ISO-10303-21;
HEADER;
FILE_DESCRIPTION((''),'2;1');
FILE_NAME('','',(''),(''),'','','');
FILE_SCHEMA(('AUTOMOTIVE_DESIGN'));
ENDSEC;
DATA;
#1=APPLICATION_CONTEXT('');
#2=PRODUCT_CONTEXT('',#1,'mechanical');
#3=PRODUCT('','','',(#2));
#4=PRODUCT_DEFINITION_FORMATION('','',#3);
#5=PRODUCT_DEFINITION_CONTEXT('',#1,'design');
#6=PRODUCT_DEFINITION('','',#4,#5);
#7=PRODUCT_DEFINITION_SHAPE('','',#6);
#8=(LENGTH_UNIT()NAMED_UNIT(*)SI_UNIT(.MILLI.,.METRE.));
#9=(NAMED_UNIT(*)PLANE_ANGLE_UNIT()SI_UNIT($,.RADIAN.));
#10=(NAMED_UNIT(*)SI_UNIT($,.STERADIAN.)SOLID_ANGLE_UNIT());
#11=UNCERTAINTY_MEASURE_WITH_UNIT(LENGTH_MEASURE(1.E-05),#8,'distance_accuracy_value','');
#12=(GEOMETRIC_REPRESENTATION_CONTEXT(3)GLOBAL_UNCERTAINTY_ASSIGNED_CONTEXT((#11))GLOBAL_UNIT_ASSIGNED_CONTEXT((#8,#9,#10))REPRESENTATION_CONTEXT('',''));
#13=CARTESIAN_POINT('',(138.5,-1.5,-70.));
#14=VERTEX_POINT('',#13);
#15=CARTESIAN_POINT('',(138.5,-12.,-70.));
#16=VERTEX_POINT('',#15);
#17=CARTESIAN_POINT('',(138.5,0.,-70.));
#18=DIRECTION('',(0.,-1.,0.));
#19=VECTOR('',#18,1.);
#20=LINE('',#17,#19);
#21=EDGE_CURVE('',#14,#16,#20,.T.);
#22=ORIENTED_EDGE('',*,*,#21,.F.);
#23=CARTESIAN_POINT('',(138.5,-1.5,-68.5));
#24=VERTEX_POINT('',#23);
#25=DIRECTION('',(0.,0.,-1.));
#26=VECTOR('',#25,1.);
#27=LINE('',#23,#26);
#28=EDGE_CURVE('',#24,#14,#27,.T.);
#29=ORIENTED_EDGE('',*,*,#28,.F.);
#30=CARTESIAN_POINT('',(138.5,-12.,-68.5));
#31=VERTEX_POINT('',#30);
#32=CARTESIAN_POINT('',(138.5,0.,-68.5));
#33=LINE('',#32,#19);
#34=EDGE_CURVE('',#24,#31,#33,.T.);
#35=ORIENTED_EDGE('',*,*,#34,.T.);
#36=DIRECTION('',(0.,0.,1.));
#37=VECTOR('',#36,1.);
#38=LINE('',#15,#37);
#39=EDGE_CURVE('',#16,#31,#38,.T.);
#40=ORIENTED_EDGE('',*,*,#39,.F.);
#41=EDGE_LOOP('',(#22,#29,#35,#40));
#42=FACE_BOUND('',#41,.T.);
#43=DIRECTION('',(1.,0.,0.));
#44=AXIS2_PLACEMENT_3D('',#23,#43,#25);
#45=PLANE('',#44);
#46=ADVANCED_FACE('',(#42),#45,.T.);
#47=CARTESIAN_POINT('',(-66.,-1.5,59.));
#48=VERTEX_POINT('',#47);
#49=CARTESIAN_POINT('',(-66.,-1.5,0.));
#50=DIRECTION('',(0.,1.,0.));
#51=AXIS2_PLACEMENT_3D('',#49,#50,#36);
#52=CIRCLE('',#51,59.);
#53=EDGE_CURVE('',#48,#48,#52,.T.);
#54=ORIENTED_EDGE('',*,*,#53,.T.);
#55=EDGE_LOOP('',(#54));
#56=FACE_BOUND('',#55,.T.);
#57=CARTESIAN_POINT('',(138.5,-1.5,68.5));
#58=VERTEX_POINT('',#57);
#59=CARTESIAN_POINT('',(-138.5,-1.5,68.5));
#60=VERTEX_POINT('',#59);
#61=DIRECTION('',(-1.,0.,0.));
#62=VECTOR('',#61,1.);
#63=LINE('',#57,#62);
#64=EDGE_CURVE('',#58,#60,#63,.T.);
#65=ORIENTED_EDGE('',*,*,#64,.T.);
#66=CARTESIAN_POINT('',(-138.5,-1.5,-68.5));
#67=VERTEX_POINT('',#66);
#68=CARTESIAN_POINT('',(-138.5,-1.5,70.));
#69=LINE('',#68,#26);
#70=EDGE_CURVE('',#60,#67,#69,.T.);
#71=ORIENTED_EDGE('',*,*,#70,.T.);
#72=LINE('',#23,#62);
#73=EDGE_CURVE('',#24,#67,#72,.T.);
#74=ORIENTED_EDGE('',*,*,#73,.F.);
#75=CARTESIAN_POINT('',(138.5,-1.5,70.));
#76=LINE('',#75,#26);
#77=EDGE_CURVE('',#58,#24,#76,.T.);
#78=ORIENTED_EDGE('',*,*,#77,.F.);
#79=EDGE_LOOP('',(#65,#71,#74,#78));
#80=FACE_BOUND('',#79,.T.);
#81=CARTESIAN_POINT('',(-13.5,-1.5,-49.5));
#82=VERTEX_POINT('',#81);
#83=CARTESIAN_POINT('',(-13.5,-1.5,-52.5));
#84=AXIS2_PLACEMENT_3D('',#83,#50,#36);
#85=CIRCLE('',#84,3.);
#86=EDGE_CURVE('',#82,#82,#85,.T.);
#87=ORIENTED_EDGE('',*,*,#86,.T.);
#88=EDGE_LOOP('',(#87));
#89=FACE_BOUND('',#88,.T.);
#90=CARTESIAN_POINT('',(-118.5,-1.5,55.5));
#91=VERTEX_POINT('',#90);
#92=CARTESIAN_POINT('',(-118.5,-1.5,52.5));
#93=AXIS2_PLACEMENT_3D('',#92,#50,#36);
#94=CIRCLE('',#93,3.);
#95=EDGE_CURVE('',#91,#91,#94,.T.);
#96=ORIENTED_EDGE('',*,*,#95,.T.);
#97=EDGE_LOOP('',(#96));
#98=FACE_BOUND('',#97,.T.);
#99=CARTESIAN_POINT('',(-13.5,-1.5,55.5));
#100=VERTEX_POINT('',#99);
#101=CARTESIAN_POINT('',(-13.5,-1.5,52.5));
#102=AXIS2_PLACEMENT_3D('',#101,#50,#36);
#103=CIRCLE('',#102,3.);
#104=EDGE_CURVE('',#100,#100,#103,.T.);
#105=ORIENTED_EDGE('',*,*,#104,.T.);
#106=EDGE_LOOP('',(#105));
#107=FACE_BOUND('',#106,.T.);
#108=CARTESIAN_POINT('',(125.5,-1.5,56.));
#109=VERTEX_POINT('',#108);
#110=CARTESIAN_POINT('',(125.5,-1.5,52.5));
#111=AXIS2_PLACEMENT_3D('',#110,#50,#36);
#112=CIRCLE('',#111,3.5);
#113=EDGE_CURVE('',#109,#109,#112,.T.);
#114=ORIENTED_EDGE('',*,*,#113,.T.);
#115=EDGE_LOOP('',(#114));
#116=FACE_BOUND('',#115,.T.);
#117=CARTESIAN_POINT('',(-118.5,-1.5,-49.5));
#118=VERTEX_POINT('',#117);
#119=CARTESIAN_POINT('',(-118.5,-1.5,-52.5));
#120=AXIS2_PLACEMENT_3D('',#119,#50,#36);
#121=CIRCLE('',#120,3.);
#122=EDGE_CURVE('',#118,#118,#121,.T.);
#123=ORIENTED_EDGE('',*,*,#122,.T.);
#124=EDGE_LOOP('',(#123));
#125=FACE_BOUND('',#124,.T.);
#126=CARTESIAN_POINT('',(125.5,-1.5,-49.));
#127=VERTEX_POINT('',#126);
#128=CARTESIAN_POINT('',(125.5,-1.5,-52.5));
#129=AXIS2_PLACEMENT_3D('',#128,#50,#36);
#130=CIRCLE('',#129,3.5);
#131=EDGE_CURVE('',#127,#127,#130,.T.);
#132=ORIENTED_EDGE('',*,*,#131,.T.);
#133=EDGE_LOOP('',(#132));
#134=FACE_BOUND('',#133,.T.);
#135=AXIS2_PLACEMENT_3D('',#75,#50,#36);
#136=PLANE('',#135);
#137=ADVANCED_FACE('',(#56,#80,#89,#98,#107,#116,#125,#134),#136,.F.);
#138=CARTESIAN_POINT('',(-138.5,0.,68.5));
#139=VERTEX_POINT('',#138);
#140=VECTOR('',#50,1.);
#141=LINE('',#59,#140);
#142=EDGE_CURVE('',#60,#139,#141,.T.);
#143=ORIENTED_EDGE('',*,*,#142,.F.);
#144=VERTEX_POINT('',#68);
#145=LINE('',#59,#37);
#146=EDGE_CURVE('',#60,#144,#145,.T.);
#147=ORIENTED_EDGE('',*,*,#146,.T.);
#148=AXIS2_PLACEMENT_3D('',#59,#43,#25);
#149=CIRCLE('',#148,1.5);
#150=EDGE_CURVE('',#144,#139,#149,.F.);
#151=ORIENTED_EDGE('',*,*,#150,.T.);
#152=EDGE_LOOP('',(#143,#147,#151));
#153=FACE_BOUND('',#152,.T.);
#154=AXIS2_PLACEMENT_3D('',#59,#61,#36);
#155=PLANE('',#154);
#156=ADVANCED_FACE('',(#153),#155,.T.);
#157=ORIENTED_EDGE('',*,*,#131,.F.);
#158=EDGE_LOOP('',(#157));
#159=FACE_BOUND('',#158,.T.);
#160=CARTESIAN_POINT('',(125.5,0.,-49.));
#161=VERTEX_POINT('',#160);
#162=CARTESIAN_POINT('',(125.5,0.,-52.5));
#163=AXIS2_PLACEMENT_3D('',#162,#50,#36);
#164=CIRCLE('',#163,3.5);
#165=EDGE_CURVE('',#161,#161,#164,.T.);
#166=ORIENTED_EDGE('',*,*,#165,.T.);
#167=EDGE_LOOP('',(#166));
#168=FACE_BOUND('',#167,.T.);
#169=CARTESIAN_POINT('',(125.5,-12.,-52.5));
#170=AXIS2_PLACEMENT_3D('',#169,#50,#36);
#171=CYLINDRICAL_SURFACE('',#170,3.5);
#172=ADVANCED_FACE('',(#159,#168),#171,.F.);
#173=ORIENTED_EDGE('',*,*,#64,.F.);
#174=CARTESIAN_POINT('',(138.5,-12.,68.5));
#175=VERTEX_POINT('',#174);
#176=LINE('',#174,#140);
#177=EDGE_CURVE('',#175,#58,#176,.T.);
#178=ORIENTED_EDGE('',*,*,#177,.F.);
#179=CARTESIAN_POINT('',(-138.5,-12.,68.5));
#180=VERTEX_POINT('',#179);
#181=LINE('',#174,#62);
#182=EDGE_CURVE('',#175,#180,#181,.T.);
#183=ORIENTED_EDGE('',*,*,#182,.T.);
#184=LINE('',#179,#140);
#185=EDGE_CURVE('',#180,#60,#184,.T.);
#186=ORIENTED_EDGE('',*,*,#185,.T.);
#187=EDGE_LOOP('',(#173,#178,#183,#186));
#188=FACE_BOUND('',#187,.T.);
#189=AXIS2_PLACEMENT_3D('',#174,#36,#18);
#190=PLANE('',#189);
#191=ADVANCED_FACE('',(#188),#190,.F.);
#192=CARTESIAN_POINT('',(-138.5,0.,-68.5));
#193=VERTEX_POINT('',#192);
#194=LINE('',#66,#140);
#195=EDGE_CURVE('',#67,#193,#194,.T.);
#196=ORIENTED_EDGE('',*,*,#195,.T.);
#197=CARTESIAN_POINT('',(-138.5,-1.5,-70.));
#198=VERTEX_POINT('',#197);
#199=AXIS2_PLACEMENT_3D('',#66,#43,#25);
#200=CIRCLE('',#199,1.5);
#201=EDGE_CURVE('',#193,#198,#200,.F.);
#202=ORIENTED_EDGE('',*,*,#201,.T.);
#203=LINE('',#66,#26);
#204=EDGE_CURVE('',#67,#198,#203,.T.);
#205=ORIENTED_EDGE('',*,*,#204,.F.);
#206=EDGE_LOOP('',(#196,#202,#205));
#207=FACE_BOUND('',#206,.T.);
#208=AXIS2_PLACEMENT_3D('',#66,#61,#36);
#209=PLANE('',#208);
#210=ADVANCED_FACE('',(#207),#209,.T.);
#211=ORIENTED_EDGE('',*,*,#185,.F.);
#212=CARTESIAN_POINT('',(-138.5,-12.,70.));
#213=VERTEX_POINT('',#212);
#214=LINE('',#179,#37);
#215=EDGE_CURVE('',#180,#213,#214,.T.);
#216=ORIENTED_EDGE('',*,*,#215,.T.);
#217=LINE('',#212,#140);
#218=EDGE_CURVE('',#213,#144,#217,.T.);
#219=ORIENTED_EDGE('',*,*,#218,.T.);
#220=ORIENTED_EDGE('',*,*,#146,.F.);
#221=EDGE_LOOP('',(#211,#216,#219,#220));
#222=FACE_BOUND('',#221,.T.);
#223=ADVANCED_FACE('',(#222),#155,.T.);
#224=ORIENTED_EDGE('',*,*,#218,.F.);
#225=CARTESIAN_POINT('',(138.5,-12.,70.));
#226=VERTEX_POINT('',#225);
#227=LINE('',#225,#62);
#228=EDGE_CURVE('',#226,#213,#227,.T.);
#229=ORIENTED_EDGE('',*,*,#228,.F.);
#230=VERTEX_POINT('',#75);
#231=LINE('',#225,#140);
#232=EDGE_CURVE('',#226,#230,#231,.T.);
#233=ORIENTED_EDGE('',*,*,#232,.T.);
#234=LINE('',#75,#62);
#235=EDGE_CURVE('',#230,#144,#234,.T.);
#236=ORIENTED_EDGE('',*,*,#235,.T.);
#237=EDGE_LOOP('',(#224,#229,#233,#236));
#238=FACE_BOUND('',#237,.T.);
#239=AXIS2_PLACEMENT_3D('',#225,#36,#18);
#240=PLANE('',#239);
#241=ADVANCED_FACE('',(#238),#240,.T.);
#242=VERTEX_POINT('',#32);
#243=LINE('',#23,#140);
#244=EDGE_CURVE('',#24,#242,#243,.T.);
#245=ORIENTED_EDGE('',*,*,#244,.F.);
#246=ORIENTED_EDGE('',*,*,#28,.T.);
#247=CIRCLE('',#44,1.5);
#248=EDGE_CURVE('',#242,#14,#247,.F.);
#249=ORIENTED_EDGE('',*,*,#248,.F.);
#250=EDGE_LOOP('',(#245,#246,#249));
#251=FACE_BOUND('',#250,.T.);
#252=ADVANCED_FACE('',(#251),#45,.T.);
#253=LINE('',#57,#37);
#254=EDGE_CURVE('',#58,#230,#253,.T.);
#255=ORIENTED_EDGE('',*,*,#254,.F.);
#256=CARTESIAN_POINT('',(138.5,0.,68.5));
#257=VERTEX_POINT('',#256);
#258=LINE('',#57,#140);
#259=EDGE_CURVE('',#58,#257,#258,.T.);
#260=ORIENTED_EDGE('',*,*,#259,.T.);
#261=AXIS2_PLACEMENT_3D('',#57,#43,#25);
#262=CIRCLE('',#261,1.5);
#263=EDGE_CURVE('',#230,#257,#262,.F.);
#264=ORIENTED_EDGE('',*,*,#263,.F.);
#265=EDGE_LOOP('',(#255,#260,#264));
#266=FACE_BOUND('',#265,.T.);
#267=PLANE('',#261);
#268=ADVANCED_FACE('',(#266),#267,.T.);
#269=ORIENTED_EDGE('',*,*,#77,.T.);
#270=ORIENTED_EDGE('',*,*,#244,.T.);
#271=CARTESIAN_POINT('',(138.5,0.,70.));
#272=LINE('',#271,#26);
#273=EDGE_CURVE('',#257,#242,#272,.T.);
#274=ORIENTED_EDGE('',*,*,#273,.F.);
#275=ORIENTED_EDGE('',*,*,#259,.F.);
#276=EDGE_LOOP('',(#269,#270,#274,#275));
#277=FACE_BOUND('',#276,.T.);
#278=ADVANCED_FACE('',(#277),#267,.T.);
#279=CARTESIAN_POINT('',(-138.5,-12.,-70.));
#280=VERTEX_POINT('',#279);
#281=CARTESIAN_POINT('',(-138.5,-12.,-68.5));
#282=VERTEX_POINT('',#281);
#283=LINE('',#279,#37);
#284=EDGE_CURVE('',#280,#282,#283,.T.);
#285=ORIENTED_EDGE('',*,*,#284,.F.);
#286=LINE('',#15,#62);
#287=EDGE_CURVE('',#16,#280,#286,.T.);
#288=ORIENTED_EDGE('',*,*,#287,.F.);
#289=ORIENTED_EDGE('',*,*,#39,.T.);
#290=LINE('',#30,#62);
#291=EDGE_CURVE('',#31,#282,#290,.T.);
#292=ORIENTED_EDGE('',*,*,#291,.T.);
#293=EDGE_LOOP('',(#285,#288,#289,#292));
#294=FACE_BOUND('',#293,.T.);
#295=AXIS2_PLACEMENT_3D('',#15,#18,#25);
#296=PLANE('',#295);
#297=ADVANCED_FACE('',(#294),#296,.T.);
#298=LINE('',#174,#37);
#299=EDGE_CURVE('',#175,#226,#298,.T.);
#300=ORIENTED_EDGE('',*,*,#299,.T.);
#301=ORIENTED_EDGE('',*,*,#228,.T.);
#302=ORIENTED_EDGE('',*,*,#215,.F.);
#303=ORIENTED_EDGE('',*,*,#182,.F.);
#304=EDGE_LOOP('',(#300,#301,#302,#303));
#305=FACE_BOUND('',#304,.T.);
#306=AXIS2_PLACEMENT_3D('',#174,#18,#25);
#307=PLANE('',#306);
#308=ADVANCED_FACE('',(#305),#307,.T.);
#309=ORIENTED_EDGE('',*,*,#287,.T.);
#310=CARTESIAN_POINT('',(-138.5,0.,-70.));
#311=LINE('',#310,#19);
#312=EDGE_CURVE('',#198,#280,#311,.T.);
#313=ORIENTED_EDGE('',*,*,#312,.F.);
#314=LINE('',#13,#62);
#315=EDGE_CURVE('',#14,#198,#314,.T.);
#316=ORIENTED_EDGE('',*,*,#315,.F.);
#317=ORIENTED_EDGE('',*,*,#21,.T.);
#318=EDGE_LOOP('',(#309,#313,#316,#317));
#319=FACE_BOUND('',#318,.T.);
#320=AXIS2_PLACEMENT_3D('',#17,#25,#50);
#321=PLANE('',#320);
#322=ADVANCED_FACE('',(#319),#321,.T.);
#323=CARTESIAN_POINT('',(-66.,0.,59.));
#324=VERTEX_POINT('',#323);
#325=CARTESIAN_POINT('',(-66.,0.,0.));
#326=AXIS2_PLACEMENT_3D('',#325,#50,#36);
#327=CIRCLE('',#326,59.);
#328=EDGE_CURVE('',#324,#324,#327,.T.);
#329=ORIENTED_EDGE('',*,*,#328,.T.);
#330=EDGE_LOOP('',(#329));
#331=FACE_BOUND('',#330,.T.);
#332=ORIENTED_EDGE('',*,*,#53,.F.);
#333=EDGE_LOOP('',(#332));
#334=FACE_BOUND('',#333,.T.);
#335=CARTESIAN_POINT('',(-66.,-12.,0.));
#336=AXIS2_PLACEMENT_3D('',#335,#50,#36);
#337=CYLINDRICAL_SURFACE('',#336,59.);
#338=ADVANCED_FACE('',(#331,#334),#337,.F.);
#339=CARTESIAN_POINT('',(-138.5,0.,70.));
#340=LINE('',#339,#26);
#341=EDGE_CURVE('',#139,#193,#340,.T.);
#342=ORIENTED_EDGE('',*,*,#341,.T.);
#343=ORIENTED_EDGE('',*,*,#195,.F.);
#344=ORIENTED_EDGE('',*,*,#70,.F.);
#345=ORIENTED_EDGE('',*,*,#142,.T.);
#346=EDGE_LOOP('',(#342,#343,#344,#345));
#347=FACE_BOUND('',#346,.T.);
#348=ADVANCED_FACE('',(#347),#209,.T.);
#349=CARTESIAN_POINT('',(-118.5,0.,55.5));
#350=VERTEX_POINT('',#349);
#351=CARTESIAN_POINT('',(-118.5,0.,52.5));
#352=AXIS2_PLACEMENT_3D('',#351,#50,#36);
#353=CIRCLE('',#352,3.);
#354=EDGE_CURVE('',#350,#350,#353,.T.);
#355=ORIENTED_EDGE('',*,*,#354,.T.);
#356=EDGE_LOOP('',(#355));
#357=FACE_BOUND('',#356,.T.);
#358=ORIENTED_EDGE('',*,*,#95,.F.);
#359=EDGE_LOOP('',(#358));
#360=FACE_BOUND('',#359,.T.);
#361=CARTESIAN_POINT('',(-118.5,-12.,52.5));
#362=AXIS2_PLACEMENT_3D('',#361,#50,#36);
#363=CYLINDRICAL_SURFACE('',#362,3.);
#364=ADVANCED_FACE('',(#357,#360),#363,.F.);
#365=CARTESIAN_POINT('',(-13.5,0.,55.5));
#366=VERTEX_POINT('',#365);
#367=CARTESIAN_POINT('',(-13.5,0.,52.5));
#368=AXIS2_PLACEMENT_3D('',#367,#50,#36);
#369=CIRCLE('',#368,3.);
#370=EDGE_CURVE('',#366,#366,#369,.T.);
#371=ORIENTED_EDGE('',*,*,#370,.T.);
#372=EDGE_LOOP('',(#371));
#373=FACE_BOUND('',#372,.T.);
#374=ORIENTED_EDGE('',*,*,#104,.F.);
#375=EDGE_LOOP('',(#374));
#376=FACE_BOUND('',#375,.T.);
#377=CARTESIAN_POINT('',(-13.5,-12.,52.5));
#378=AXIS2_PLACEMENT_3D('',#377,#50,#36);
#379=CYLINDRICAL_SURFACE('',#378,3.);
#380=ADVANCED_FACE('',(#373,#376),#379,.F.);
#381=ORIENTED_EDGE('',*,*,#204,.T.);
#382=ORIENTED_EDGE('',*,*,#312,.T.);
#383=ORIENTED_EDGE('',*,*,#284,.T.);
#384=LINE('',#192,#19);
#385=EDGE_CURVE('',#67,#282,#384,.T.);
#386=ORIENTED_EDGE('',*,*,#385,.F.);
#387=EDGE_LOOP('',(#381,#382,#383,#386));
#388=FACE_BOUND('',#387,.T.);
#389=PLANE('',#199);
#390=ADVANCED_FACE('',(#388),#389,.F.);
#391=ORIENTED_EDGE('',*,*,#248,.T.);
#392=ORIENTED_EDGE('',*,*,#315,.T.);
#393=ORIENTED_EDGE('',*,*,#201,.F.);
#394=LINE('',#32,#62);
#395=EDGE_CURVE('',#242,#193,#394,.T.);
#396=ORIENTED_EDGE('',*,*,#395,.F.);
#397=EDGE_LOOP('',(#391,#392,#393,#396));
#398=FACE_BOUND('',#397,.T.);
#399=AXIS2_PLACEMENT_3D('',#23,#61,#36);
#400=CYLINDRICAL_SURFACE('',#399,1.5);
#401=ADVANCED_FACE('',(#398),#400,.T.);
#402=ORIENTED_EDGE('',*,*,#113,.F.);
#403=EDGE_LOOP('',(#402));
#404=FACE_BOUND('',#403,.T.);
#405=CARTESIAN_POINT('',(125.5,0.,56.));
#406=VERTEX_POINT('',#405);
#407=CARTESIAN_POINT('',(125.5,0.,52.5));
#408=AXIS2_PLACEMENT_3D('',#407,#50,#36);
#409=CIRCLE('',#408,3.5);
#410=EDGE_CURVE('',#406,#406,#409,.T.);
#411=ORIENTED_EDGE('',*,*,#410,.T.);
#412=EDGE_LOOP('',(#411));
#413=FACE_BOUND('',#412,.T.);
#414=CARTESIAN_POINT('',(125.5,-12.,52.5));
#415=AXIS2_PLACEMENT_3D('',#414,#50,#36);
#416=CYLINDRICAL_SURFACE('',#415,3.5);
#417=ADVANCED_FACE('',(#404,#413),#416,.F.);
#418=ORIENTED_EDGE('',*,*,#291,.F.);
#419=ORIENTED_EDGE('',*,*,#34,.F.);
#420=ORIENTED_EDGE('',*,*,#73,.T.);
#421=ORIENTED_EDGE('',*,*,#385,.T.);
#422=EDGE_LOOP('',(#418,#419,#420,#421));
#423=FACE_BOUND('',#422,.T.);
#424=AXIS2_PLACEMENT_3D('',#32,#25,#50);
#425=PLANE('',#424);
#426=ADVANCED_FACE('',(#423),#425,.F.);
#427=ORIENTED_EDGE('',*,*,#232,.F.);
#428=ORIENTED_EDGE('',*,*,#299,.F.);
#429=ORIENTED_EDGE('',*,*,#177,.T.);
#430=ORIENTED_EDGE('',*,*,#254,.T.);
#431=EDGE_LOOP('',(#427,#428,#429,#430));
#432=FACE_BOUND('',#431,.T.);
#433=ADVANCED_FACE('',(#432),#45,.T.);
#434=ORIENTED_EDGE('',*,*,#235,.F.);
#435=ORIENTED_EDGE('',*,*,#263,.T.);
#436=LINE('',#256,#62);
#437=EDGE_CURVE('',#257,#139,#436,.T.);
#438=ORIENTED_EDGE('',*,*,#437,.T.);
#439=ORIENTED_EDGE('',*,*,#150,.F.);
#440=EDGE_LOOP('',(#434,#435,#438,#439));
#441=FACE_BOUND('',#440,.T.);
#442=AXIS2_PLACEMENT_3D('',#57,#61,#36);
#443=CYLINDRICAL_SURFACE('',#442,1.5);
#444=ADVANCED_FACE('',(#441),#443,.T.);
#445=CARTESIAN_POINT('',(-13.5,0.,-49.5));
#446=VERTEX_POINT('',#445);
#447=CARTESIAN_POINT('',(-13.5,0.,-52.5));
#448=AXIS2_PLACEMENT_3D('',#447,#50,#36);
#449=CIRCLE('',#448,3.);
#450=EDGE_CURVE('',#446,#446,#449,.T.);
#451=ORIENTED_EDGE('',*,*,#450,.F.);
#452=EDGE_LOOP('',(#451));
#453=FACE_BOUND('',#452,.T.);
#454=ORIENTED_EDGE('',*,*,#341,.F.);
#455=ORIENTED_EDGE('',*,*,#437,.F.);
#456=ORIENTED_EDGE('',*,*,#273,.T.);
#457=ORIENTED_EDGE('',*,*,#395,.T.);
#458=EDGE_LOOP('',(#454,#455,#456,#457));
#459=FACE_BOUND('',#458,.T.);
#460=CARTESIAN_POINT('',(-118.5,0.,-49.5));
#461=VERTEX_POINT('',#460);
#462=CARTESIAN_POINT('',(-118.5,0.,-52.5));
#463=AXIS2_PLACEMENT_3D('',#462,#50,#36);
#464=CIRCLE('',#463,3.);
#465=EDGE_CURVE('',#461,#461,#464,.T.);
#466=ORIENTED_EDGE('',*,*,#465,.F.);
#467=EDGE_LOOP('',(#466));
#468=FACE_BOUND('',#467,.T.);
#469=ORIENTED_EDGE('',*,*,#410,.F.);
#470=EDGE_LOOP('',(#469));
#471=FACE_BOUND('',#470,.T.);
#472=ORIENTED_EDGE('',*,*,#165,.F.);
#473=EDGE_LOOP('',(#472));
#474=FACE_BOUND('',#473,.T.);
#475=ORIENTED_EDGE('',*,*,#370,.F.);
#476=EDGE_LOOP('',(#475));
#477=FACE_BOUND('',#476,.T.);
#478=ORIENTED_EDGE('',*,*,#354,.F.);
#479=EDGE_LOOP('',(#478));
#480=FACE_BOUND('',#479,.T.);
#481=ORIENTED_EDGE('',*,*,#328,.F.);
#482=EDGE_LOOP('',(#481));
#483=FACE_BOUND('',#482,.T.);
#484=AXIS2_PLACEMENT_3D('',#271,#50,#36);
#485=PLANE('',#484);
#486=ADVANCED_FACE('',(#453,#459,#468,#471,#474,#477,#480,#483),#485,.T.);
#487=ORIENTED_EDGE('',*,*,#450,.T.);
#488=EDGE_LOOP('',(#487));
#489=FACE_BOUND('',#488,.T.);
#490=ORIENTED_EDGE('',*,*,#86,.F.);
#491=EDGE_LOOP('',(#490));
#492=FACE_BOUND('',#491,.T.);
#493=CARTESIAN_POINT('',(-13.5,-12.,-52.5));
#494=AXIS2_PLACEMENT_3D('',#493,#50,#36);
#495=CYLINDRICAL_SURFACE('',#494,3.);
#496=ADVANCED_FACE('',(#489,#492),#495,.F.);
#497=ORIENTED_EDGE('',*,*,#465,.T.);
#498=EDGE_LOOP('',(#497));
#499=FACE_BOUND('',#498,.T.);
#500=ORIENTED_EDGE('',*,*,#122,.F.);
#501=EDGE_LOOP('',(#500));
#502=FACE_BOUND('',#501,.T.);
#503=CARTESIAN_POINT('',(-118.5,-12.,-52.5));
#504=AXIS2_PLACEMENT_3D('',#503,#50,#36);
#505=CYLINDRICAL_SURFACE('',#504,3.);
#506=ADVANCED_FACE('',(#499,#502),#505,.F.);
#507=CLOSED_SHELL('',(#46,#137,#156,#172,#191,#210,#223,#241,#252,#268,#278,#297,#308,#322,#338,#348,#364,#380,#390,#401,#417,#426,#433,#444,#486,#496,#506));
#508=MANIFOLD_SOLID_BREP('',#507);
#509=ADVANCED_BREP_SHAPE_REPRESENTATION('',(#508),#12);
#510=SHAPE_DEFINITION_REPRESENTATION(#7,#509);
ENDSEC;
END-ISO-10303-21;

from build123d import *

# Parameters (mm, degrees)
SM_START               = -138.5
SM_BASE_FLANGE_1_DEPTH = 277
SKETCH_6_R             = 59
SKETCH_6_R_2           = 3
SKETCH_6_R_3           = 3.5
CUT_EXTRUDE_1_DEPTH    = 156.647839689


# Read off the part's stored shape, not the designer's step: 基体-法兰1
with BuildPart() as part:
    # 基体-法兰1 outline → 基体-法兰1 (new body)
    with BuildSketch(Plane(origin=(0, 0, 0), x_dir=(0, 0, -1), z_dir=(1, 0, 0)).offset(SM_START)):
        with BuildLine():
            Line((68.5, -1.5), (68.5, -12))
            Line((68.5, -12), (70, -12))
            Line((70, -12), (70, -1.5))
            ThreePointArc((70, -1.5), (69.560660172, -0.439339828), (68.5, 0))
            Line((68.5, 0), (-68.5, 0))
            ThreePointArc((-68.5, 0), (-69.560660172, -0.439339828), (-70, -1.5))
            Line((-70, -1.5), (-70, -12))
            Line((-70, -12), (-68.5, -12))
            Line((-68.5, -12), (-68.5, -1.5))
            Line((-68.5, -1.5), (68.5, -1.5))
        make_face()
    extrude(amount=SM_BASE_FLANGE_1_DEPTH)

    # 草图6 → 切除-拉伸1 (cut, through all)
    with BuildSketch(Plane(origin=(0, 0, 0), x_dir=(1, 0, 0), z_dir=(0, 1, 0))):
        with Locations(Location((-66, 0, 0), (0, 0, 270))):
            Circle(SKETCH_6_R)
        with Locations(Location((-118.5, 52.5, 0), (0, 0, 270))):
            Circle(SKETCH_6_R_2)
        with Locations(Location((-13.5, 52.5, 0), (0, 0, 270))):
            Circle(SKETCH_6_R_2)
        with Locations(Location((-13.5, -52.5, 0), (0, 0, 270))):
            Circle(SKETCH_6_R_2)
        with Locations(Location((-118.5, -52.5, 0), (0, 0, 270))):
            Circle(SKETCH_6_R_2)
        with Locations(Location((125.5, 52.5, 0), (0, 0, 270))):
            Circle(SKETCH_6_R_3)
        with Locations(Location((125.5, -52.5, 0), (0, 0, 270))):
            Circle(SKETCH_6_R_3)
    extrude(amount=-CUT_EXTRUDE_1_DEPTH, mode=Mode.SUBTRACT)


solid = part.part
